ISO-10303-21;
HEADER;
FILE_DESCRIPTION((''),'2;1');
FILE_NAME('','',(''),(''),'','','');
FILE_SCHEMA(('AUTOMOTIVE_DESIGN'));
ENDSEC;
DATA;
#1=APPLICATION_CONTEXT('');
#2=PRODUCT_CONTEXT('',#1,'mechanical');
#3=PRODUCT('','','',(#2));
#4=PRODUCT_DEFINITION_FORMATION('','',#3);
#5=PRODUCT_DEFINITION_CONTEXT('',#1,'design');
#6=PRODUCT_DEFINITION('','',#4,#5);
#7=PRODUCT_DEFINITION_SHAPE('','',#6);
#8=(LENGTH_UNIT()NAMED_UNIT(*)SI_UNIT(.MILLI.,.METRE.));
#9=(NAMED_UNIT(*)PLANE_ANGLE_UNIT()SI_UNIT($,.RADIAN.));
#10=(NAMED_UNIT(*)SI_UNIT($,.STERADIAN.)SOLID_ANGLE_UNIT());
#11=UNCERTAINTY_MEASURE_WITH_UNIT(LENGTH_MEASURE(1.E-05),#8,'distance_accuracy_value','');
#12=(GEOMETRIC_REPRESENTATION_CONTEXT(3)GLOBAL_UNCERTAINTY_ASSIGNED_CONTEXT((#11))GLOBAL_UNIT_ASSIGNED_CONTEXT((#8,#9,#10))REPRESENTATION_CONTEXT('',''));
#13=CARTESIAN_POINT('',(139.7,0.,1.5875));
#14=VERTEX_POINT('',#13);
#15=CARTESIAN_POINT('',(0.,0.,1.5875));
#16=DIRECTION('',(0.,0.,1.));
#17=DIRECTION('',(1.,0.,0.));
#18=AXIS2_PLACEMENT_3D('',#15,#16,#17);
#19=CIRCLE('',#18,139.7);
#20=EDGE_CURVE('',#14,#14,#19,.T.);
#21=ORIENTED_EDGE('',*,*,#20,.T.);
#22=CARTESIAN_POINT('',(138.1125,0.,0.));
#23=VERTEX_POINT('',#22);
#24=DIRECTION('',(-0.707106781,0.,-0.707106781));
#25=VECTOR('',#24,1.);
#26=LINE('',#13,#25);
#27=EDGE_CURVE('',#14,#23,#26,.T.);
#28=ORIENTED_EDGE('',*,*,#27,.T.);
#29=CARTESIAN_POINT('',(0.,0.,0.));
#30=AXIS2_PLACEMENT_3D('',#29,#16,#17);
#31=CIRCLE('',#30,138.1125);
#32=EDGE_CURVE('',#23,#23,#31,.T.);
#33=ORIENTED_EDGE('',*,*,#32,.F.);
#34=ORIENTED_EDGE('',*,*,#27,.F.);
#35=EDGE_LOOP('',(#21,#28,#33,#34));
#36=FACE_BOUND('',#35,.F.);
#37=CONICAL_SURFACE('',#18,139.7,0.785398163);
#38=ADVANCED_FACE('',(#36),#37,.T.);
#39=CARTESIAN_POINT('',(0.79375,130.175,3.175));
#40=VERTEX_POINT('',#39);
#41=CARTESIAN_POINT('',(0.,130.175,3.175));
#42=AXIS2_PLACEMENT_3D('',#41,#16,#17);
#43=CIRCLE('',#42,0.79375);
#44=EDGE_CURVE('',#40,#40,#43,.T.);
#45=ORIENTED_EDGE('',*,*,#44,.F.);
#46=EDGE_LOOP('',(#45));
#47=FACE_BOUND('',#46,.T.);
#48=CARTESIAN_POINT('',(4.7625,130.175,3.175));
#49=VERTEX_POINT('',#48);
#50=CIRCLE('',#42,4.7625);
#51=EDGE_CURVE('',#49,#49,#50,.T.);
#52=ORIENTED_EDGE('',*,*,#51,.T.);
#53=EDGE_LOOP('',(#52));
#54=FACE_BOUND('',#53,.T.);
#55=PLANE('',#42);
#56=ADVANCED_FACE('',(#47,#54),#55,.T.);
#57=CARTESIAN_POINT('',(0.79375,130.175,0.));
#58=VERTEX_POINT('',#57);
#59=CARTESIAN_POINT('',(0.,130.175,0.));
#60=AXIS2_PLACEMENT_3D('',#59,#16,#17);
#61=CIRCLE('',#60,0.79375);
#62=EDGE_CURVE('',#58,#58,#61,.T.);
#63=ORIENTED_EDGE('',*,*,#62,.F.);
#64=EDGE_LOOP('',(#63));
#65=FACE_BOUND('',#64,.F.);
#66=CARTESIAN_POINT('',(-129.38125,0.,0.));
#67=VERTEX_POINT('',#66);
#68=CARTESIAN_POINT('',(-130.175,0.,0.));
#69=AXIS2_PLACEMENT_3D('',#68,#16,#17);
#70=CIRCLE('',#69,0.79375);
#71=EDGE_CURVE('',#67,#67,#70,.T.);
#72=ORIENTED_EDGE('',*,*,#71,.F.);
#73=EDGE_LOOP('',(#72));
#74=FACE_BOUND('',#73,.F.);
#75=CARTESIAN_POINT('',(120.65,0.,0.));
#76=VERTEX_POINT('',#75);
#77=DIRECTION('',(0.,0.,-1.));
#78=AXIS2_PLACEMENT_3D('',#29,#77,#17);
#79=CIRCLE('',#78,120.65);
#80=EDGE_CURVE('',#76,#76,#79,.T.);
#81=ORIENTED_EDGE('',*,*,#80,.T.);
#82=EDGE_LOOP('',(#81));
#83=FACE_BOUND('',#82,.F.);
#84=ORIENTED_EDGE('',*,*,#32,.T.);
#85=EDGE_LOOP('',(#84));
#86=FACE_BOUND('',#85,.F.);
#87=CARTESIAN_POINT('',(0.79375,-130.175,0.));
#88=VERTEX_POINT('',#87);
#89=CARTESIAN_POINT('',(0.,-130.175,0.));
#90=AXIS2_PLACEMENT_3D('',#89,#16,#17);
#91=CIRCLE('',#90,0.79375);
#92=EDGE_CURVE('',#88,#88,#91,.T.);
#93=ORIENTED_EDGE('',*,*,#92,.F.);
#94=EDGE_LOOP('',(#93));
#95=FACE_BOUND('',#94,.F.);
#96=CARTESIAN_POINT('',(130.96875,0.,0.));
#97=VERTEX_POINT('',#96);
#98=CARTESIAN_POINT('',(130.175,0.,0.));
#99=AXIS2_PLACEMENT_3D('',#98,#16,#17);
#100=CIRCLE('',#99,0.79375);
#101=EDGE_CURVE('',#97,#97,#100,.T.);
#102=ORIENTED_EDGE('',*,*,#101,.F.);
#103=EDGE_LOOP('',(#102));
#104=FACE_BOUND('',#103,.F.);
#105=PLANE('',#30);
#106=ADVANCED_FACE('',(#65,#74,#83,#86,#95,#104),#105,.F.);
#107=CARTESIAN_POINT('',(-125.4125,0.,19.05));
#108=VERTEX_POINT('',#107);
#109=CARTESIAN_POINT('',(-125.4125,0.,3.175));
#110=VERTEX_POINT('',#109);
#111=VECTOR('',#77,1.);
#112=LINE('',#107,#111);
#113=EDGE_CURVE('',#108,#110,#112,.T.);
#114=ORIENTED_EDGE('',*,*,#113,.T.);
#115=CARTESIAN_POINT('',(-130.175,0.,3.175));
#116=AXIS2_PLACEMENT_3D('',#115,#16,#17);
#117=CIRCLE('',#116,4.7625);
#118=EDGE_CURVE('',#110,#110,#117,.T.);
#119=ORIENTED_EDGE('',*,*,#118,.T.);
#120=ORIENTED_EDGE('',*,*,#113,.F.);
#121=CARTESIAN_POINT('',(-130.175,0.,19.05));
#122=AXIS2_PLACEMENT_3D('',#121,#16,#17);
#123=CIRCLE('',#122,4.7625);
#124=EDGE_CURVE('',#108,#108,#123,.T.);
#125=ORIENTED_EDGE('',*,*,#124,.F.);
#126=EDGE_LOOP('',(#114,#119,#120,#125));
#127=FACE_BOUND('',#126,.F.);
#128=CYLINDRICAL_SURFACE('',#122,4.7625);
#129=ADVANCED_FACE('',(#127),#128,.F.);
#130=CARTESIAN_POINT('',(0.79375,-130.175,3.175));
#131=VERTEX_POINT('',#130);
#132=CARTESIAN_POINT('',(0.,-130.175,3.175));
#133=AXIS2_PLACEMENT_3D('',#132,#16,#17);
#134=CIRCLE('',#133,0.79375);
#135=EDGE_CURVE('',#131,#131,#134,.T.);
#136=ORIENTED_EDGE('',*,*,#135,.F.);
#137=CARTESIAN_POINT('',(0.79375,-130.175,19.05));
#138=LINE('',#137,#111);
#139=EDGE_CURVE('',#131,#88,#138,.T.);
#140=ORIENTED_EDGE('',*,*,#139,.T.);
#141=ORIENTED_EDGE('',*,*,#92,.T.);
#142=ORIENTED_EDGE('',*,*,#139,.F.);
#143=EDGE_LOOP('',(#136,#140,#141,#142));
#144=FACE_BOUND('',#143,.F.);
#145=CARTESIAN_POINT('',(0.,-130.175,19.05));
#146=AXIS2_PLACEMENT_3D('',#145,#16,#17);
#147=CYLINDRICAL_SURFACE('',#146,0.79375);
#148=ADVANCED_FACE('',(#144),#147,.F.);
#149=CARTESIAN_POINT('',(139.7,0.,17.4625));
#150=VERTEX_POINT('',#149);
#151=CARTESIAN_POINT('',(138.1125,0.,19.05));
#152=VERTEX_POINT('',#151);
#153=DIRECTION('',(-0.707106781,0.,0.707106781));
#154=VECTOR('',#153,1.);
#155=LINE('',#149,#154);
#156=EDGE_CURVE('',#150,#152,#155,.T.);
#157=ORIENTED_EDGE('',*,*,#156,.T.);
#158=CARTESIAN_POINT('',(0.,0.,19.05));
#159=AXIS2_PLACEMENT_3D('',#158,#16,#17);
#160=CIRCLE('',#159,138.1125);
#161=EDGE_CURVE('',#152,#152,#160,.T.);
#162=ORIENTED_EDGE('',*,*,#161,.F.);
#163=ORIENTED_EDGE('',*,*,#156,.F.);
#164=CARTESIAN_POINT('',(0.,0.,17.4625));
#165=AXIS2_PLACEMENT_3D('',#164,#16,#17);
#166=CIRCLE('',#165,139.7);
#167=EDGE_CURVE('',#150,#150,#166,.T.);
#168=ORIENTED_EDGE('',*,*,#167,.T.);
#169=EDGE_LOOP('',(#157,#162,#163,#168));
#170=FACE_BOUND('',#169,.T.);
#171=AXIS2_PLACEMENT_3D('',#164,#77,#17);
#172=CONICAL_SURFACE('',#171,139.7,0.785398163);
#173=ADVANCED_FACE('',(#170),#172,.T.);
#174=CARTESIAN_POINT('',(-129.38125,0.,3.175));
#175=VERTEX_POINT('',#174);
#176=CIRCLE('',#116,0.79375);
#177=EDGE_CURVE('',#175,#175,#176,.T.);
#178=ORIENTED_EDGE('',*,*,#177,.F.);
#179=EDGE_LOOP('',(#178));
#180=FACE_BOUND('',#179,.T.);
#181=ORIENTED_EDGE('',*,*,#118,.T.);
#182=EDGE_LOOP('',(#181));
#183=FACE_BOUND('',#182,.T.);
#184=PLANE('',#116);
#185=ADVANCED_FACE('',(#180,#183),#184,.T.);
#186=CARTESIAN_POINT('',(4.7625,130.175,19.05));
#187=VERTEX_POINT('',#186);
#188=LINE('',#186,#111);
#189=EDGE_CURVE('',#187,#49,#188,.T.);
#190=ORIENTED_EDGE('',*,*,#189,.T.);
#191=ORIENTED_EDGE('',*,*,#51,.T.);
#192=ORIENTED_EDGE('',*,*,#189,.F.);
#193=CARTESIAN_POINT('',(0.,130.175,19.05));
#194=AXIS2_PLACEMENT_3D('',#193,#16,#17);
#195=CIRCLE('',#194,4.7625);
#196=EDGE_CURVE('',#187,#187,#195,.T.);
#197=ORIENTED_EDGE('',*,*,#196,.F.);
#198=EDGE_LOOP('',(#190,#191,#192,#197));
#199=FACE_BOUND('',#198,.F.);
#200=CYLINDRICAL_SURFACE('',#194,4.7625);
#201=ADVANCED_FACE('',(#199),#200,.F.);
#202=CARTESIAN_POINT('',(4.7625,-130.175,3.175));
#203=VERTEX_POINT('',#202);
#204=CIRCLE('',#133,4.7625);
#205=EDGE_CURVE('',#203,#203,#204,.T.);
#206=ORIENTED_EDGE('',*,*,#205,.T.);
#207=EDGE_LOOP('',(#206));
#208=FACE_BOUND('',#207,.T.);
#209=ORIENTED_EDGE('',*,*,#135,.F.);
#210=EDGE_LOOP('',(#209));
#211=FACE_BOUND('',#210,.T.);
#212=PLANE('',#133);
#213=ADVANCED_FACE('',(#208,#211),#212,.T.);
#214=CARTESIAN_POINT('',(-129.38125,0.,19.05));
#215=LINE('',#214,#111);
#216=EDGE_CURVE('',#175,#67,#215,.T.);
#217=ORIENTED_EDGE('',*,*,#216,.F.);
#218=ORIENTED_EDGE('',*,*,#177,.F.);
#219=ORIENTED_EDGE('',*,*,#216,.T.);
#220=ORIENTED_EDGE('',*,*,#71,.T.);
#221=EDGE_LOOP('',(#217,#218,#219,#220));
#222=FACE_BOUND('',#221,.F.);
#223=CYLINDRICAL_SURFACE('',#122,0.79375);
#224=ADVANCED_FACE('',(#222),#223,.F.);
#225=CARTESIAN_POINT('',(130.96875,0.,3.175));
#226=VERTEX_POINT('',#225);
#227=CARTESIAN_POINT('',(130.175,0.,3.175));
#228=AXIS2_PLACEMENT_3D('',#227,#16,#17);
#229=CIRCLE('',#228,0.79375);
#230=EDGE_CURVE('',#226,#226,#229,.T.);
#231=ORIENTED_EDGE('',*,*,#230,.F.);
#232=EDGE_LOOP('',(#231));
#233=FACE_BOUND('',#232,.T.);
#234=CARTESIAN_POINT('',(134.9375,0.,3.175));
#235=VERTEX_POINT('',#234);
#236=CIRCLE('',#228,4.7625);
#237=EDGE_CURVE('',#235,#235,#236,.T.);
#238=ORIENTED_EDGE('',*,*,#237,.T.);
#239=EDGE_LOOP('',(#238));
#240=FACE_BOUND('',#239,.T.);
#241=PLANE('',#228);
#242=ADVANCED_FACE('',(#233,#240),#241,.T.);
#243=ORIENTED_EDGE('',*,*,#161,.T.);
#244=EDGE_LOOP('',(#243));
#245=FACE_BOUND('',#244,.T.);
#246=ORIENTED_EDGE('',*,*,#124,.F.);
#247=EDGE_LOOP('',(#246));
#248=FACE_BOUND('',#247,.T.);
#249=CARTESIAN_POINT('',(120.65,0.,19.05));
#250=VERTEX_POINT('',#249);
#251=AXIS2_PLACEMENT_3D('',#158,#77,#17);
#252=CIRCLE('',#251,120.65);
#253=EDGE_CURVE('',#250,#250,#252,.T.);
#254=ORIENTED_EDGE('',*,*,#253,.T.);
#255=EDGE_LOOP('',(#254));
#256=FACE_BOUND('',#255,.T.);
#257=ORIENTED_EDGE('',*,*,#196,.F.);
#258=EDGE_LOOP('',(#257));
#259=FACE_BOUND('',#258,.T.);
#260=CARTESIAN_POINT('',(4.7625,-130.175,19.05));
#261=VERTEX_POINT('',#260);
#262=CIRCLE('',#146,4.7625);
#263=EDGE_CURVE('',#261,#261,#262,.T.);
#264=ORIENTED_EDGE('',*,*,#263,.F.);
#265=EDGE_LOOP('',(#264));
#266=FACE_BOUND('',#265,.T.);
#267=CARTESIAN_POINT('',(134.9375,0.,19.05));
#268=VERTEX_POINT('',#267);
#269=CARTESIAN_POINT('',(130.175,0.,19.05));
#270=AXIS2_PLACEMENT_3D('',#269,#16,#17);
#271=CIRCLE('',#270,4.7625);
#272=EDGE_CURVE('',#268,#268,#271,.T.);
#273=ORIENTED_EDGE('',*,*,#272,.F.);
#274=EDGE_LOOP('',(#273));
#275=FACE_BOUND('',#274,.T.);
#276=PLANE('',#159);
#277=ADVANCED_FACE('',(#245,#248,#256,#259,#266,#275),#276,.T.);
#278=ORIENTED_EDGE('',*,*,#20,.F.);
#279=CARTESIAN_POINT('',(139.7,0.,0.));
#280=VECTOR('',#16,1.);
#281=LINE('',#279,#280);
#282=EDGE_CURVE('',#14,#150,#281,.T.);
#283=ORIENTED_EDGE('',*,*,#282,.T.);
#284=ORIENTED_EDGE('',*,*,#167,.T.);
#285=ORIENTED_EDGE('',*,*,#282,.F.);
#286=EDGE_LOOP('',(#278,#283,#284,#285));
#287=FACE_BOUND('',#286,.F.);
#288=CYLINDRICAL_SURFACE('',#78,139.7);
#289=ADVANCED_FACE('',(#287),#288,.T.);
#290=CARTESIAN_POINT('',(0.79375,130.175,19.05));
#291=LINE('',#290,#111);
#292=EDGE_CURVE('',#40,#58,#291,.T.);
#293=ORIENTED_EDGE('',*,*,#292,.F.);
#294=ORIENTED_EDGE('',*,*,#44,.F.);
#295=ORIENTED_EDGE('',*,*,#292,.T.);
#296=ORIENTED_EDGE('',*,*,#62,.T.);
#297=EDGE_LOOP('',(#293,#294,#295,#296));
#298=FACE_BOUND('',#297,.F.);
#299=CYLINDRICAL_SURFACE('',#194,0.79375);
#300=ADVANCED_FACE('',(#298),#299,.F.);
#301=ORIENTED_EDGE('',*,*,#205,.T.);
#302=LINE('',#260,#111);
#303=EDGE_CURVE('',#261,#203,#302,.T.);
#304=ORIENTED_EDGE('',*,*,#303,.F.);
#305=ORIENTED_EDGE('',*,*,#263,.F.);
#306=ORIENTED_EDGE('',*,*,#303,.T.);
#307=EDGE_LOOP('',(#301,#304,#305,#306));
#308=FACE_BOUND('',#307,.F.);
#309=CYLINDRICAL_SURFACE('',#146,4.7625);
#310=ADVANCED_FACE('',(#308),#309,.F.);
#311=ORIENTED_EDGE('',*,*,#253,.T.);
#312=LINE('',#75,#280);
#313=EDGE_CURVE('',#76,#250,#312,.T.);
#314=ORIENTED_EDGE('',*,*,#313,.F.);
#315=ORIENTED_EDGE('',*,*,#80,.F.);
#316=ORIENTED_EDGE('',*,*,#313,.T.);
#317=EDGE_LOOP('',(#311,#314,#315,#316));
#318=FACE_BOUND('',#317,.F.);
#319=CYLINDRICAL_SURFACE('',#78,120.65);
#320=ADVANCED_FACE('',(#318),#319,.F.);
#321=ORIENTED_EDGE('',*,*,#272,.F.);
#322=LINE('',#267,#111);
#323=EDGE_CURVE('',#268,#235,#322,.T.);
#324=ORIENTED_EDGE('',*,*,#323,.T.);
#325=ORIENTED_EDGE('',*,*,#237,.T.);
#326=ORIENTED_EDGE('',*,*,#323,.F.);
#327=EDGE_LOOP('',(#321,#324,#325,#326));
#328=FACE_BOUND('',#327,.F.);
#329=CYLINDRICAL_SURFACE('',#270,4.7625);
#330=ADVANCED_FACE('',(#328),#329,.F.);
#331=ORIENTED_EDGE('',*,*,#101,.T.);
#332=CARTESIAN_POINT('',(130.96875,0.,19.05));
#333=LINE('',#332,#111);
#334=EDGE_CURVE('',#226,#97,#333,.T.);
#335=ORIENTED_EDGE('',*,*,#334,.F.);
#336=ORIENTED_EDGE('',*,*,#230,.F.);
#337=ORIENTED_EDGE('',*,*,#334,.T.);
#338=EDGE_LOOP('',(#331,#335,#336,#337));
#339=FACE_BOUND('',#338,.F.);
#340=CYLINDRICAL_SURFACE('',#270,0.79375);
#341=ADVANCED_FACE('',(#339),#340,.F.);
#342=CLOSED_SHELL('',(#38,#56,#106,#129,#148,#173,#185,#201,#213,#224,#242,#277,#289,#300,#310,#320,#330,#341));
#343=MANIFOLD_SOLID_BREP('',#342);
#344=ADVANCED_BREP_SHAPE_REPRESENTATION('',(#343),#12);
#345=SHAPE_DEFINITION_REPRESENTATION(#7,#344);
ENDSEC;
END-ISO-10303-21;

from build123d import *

# Parameters (mm, degrees)
F2_R      = 139.7
F3_DEPTH  = 19.05
F4_SIZE   = 1.5875
F5_R      = 120.65
F6_DEPTH  = 19.051
F7_R      = 0.79375
F8_DEPTH  = 19.051
F9_R      = 4.7625
F9_R_2    = 0.79375
F10_DEPTH = 15.875


# Not quite as in the source:
# - a variable given as a bare number and used for a length is read in inches; the dataset says mm whatever the document's units were


with BuildPart() as f3:
    # F2 (on Top) → F3 (new body)
    with BuildSketch(Plane.XY):
        Circle(F2_R)
    extrude(amount=F3_DEPTH)

    # F4
    f4_edges = [f3.edges().sort_by_distance(p)[0] for p in [
        (-139.7, 0, 19.05),
        (-139.7, 0, 0),
    ]]
    chamfer(f4_edges, length=F4_SIZE)

    # F5 (on face) → F6 (cut, through all)
    with BuildSketch(Plane(origin=(0, 0, 0), x_dir=(1, 0, 0), z_dir=(0, 0, -1))):
        Circle(F5_R)
    extrude(amount=-F6_DEPTH, mode=Mode.SUBTRACT)

    # F7 (on face) → F8 (cut, through all)
    with BuildSketch(Plane.XY.offset(19.05)):
        with Locations((0, 130.175)):
            Circle(F7_R)
        with Locations((130.175, 0)):
            Circle(F7_R)
        with Locations((0, -130.175)):
            Circle(F7_R)
        with Locations((-130.175, 0)):
            Circle(F7_R)
    extrude(amount=-F8_DEPTH, mode=Mode.SUBTRACT)

    # F9 (on face) → F10 (cut)
    with BuildSketch(Plane.XY.offset(19.05)):
        with Locations((0, 130.175)):
            Circle(F9_R)
        with Locations((0, 130.175)):
            Circle(F9_R_2, mode=Mode.SUBTRACT)
        with Locations((130.175, 0)):
            Circle(F9_R)
        with Locations((130.175, 0)):
            Circle(F9_R_2, mode=Mode.SUBTRACT)
        with Locations((-130.175, 0)):
            Circle(F9_R)
        with Locations((-130.175, 0)):
            Circle(F9_R_2, mode=Mode.SUBTRACT)
        with Locations((0, -130.175)):
            Circle(F9_R)
        with Locations((0, -130.175)):
            Circle(F9_R_2, mode=Mode.SUBTRACT)
    extrude(amount=-F10_DEPTH, mode=Mode.SUBTRACT)


solid = f3.part
